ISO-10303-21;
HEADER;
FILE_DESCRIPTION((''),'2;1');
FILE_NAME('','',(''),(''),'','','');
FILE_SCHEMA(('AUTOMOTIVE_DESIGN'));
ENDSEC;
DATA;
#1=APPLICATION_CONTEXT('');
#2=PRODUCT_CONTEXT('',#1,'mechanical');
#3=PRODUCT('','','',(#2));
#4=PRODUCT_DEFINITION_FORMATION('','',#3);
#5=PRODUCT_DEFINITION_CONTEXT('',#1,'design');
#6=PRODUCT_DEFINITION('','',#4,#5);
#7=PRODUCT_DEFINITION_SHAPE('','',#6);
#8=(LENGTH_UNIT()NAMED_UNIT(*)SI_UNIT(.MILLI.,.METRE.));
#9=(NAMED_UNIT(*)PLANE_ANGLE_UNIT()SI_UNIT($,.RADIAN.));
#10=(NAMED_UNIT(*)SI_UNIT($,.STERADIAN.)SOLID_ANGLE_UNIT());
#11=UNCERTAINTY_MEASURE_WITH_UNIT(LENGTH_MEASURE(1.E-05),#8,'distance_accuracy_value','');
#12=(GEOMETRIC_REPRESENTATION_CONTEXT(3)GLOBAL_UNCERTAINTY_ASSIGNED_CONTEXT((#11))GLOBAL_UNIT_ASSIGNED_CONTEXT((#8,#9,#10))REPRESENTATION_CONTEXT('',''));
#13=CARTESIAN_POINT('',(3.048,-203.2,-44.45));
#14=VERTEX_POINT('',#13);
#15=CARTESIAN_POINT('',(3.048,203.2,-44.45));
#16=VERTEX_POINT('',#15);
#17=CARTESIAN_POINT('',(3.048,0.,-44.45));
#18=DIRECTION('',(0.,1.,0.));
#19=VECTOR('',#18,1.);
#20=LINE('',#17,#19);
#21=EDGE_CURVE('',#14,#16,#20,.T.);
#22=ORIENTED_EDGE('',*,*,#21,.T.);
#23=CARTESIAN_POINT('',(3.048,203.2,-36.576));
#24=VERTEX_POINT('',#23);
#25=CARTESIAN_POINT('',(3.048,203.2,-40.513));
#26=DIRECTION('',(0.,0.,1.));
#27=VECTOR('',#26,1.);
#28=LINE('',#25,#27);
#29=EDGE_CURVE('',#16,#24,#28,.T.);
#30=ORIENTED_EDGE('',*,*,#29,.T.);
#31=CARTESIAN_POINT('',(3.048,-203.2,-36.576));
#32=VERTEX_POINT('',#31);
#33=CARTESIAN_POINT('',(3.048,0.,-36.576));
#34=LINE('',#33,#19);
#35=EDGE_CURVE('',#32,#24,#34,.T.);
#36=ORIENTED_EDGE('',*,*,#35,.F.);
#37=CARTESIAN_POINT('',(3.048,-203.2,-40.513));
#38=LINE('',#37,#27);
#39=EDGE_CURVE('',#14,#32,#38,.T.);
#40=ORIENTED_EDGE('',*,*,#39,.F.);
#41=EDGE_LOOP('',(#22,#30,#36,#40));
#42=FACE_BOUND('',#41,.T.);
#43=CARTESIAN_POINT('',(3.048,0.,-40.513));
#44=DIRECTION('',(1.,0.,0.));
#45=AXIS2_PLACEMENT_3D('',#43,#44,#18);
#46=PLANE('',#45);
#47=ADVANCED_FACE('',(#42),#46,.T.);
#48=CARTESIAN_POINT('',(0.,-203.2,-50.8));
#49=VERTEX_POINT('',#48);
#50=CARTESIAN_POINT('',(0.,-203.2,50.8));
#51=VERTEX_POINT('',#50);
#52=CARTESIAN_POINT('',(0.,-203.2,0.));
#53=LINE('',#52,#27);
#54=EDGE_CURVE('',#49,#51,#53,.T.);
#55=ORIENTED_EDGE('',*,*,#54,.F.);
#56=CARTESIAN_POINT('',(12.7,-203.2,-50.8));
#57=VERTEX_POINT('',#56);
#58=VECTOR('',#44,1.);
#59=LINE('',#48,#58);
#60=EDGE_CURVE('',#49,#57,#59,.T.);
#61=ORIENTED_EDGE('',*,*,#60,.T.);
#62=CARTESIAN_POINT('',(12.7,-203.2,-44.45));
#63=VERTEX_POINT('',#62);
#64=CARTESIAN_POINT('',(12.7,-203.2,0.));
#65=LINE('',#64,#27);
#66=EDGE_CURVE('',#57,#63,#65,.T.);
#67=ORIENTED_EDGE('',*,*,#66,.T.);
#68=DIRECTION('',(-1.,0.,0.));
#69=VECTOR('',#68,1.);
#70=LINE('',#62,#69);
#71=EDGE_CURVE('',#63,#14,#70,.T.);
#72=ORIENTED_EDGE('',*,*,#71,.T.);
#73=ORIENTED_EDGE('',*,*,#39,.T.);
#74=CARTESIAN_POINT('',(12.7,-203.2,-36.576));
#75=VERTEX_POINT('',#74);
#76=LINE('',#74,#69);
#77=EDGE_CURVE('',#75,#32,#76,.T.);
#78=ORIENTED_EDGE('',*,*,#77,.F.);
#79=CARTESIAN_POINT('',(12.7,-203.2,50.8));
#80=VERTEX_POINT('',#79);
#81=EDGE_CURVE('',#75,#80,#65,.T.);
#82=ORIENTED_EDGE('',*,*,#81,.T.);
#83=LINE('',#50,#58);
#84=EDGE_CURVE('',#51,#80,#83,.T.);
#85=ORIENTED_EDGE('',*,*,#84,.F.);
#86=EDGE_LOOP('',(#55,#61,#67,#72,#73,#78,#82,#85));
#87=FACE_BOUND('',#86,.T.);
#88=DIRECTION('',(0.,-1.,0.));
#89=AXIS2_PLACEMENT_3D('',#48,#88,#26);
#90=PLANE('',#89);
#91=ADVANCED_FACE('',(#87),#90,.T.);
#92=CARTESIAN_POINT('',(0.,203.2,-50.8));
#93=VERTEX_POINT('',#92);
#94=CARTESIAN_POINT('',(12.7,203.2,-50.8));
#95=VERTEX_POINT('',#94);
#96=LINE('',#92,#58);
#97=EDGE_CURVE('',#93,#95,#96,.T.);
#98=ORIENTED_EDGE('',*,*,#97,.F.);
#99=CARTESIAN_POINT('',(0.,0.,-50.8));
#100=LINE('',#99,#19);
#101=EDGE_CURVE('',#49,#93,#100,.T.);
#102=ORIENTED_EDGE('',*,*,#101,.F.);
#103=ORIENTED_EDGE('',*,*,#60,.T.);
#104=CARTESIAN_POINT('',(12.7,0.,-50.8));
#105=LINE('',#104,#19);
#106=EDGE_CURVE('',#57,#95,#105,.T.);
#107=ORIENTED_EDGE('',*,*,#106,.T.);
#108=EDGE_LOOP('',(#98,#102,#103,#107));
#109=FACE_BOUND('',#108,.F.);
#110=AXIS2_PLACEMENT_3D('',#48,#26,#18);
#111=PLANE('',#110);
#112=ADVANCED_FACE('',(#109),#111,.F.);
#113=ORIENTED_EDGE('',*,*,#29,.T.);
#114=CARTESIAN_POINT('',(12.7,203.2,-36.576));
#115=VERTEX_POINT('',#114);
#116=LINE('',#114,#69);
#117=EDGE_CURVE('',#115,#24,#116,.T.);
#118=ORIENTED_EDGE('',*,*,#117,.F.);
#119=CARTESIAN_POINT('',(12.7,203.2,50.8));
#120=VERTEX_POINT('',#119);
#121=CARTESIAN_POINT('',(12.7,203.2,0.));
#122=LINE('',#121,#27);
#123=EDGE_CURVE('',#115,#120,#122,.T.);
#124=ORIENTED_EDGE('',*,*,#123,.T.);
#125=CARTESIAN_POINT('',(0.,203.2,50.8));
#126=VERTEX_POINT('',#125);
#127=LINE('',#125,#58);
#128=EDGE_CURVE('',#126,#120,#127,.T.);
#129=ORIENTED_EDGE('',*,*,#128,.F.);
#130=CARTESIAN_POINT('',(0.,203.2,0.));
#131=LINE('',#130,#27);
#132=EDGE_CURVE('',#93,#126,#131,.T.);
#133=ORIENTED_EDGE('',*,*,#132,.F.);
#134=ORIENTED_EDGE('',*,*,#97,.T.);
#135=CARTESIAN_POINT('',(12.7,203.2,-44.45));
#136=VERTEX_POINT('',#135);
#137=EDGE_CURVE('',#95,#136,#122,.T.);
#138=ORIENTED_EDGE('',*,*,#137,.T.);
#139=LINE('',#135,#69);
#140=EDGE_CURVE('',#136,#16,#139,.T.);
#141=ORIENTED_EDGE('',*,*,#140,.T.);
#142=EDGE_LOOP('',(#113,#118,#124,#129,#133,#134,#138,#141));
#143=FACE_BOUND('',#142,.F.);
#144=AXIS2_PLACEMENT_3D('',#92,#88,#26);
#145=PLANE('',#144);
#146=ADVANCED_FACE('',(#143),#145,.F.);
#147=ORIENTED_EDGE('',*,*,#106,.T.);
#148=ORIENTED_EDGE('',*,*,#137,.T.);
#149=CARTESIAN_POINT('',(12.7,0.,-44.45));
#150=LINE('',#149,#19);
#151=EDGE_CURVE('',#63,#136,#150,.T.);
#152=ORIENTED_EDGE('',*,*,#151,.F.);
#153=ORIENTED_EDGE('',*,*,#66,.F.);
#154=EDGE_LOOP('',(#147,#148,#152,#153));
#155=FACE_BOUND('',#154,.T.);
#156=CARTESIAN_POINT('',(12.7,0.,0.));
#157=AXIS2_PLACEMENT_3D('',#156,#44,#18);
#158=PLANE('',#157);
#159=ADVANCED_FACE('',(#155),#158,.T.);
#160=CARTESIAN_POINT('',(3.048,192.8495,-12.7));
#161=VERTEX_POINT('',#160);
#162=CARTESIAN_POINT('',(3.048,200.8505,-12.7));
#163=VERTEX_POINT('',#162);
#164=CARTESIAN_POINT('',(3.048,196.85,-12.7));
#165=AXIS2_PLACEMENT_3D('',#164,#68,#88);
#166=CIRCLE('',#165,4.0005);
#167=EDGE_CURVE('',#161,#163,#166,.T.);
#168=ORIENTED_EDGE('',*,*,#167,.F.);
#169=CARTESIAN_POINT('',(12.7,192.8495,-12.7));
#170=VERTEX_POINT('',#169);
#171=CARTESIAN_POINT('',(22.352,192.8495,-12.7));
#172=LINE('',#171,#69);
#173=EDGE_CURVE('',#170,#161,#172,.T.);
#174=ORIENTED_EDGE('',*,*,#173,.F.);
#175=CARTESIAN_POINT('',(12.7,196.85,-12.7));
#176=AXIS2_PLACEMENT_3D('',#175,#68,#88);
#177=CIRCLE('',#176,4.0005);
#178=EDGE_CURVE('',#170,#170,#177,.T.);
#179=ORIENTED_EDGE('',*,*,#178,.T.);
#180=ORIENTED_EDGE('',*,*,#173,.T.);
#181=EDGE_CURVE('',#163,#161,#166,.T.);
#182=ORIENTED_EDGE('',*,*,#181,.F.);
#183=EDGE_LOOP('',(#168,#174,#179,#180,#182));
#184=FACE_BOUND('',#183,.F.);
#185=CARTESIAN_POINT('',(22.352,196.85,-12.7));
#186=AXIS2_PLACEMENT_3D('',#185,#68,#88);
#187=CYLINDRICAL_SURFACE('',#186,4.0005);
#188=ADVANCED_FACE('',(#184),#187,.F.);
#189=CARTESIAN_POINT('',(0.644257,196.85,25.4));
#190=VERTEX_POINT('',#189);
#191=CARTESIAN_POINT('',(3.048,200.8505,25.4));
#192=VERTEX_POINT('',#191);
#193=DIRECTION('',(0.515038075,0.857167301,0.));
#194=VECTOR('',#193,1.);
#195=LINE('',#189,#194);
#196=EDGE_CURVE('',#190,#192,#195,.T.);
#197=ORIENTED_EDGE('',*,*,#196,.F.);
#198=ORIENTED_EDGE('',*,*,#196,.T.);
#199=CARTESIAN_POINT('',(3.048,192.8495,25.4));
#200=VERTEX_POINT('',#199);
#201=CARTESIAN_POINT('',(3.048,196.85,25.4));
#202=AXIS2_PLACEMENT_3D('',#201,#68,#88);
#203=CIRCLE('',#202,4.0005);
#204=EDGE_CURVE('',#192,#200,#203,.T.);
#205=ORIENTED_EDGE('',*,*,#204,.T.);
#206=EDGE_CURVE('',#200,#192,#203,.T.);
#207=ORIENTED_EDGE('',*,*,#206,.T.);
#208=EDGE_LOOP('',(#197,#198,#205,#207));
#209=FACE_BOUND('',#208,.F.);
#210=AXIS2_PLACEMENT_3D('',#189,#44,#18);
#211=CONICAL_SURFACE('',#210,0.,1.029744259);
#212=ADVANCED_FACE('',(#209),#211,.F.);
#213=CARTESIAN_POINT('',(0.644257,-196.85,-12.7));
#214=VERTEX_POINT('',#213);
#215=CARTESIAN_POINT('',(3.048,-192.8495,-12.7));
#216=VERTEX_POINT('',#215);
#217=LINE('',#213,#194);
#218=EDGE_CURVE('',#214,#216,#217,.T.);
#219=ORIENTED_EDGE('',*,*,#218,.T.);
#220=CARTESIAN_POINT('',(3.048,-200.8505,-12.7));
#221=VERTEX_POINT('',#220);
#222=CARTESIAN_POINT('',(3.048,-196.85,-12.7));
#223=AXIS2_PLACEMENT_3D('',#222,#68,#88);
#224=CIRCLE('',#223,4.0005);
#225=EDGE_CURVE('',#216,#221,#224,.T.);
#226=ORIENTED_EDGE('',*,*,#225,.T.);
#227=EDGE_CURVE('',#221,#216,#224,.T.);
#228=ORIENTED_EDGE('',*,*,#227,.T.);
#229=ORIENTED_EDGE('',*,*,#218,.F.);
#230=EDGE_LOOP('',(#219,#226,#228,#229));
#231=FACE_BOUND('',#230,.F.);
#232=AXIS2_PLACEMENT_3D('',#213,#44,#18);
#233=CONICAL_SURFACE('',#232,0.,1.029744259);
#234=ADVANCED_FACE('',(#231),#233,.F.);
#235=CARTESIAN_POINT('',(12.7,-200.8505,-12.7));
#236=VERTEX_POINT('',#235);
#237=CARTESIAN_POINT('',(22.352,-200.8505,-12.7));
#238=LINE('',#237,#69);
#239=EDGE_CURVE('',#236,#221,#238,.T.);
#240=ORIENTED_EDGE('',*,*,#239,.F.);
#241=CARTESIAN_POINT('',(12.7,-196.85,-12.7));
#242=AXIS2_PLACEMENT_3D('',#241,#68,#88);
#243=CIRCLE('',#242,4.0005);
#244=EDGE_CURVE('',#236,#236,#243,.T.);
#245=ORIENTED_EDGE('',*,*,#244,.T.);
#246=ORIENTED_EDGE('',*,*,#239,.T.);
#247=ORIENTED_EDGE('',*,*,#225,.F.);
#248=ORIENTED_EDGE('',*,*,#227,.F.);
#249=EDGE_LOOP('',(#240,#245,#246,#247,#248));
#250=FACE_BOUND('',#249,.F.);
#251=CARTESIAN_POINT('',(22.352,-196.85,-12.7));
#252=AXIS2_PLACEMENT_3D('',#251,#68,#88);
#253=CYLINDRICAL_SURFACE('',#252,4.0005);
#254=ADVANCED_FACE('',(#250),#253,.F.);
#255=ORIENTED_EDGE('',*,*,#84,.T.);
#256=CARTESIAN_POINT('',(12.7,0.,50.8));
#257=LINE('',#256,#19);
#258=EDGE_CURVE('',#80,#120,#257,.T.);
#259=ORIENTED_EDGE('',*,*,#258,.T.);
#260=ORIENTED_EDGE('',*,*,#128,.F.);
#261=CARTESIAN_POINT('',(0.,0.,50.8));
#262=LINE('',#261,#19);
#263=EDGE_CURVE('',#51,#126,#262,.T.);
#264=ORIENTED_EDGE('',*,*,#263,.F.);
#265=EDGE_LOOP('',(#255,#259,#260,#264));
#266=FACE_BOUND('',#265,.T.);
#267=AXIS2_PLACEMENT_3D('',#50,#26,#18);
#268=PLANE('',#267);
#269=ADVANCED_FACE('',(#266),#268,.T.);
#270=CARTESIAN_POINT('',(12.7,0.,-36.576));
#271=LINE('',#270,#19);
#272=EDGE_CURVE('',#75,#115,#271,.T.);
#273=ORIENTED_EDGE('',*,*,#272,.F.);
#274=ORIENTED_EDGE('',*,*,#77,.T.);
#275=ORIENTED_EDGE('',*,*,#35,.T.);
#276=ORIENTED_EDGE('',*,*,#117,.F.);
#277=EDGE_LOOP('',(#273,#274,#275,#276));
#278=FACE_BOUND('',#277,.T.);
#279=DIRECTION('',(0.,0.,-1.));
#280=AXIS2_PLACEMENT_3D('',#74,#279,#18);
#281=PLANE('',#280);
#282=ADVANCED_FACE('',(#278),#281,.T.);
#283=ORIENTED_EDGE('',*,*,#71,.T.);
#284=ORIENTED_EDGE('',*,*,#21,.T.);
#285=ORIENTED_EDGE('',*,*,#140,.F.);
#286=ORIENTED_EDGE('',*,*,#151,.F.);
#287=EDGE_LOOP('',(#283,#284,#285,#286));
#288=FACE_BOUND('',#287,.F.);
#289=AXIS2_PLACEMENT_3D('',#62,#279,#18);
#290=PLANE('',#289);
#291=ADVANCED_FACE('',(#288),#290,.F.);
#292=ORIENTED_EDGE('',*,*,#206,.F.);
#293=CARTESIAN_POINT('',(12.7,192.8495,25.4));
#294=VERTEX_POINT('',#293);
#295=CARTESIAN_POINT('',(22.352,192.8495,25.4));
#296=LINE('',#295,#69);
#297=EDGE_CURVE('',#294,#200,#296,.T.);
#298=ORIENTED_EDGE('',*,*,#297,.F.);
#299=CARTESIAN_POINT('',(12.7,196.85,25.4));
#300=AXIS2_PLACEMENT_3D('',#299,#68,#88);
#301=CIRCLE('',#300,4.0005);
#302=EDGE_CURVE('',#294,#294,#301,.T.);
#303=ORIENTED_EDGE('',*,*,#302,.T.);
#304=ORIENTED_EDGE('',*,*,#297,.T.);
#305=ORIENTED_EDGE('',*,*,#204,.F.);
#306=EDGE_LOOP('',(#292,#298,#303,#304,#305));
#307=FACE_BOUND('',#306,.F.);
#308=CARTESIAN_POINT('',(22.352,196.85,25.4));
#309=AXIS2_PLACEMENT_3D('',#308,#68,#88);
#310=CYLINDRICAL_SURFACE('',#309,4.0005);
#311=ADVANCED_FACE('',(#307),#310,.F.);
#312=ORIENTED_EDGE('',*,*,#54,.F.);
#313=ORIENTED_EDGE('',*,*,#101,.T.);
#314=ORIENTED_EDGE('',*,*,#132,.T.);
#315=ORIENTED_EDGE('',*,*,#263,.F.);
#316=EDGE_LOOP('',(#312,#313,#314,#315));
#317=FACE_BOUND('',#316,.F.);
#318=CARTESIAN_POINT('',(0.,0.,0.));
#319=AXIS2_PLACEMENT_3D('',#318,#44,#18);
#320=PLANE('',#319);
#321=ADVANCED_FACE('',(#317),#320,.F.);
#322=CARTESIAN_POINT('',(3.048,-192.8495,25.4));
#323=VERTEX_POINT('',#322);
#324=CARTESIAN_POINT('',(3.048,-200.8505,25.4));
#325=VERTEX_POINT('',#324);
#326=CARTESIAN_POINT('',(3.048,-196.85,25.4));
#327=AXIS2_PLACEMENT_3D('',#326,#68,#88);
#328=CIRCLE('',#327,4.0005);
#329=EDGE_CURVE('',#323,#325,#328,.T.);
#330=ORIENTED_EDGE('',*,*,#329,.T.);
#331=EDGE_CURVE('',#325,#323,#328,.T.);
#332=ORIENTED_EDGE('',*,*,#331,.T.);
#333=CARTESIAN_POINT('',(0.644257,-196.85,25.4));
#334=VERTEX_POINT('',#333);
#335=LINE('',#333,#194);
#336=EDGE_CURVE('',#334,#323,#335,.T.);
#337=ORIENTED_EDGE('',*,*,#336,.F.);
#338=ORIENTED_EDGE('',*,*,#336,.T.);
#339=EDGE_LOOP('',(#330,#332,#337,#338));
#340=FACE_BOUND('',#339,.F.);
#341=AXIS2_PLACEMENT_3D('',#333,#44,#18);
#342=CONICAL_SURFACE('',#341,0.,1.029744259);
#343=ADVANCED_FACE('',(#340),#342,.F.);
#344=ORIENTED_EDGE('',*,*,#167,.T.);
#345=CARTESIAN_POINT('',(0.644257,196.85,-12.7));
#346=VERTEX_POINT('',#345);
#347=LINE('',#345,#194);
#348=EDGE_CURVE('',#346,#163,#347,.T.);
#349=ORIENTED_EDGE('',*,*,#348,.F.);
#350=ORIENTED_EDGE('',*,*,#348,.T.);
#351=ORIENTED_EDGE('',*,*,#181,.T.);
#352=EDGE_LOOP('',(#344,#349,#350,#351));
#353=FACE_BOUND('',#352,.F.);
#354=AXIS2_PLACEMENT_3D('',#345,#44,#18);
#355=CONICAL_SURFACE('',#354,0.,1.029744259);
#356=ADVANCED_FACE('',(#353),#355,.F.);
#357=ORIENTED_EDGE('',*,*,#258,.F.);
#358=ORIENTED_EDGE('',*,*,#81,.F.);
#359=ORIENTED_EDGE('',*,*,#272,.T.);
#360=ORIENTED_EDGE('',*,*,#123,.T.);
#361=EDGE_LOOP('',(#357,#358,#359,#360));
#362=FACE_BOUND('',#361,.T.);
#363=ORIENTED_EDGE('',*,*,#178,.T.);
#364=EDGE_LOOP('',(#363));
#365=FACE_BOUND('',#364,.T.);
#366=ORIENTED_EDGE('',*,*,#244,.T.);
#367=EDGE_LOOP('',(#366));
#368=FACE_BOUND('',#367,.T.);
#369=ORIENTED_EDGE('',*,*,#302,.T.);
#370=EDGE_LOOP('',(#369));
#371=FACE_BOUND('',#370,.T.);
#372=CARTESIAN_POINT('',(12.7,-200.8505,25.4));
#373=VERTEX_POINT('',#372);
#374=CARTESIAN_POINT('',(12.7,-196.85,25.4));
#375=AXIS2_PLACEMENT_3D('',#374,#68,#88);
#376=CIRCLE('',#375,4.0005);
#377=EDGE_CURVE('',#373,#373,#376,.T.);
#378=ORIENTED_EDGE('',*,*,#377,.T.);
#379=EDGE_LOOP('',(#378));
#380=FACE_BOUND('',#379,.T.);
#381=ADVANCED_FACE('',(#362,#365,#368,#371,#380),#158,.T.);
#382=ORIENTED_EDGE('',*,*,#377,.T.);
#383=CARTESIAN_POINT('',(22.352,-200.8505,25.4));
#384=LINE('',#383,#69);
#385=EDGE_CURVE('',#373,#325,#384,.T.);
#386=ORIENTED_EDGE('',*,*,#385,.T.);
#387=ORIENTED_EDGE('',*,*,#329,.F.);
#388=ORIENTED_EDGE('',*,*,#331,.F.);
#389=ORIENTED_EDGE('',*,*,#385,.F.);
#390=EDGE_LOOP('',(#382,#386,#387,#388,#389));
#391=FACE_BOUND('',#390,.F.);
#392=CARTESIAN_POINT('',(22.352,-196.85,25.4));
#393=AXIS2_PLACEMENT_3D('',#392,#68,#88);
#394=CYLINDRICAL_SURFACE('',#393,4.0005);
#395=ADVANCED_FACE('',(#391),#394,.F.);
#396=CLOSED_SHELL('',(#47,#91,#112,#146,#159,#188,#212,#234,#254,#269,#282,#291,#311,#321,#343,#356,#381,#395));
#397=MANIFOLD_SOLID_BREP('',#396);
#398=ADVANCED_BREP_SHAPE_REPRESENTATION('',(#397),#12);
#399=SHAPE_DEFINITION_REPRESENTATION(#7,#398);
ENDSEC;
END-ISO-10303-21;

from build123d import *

# Parameters (mm, degrees)
F0_W     = 406.4
F0_H     = 101.6
F1_DEPTH = 12.7
F2_W     = 406.4
F2_H     = 7.874
F3_DEPTH = 9.652
F5_D     = 8.001
F5_DEPTH = 9.652
F5_TIP   = 2.4037429064


with BuildPart() as f1:
    # F0 (on Right) → F1 (new body)
    with BuildSketch(Plane.YZ):
        Rectangle(F0_W, F0_H)
    extrude(amount=F1_DEPTH)

    # F2 (on face) → F3 (cut)
    with BuildSketch(Plane.YZ.offset(12.7)):
        with Locations((0, -40.513)):
            Rectangle(F2_W, F2_H)
    extrude(amount=-F3_DEPTH, mode=Mode.SUBTRACT)

    # F5
    with Locations(Plane.YZ.offset(12.7)):
        with Locations((-196.85, 25.4), (-196.85, -12.7), (196.85, 25.4), (196.85, -12.7)):
            Hole(F5_D / 2, depth=F5_DEPTH)
            with Locations((0, 0, -(F5_DEPTH + F5_TIP / 2))):  # 118° drill point
                Cone(0, F5_D / 2, F5_TIP, mode=Mode.SUBTRACT)


solid = f1.part
